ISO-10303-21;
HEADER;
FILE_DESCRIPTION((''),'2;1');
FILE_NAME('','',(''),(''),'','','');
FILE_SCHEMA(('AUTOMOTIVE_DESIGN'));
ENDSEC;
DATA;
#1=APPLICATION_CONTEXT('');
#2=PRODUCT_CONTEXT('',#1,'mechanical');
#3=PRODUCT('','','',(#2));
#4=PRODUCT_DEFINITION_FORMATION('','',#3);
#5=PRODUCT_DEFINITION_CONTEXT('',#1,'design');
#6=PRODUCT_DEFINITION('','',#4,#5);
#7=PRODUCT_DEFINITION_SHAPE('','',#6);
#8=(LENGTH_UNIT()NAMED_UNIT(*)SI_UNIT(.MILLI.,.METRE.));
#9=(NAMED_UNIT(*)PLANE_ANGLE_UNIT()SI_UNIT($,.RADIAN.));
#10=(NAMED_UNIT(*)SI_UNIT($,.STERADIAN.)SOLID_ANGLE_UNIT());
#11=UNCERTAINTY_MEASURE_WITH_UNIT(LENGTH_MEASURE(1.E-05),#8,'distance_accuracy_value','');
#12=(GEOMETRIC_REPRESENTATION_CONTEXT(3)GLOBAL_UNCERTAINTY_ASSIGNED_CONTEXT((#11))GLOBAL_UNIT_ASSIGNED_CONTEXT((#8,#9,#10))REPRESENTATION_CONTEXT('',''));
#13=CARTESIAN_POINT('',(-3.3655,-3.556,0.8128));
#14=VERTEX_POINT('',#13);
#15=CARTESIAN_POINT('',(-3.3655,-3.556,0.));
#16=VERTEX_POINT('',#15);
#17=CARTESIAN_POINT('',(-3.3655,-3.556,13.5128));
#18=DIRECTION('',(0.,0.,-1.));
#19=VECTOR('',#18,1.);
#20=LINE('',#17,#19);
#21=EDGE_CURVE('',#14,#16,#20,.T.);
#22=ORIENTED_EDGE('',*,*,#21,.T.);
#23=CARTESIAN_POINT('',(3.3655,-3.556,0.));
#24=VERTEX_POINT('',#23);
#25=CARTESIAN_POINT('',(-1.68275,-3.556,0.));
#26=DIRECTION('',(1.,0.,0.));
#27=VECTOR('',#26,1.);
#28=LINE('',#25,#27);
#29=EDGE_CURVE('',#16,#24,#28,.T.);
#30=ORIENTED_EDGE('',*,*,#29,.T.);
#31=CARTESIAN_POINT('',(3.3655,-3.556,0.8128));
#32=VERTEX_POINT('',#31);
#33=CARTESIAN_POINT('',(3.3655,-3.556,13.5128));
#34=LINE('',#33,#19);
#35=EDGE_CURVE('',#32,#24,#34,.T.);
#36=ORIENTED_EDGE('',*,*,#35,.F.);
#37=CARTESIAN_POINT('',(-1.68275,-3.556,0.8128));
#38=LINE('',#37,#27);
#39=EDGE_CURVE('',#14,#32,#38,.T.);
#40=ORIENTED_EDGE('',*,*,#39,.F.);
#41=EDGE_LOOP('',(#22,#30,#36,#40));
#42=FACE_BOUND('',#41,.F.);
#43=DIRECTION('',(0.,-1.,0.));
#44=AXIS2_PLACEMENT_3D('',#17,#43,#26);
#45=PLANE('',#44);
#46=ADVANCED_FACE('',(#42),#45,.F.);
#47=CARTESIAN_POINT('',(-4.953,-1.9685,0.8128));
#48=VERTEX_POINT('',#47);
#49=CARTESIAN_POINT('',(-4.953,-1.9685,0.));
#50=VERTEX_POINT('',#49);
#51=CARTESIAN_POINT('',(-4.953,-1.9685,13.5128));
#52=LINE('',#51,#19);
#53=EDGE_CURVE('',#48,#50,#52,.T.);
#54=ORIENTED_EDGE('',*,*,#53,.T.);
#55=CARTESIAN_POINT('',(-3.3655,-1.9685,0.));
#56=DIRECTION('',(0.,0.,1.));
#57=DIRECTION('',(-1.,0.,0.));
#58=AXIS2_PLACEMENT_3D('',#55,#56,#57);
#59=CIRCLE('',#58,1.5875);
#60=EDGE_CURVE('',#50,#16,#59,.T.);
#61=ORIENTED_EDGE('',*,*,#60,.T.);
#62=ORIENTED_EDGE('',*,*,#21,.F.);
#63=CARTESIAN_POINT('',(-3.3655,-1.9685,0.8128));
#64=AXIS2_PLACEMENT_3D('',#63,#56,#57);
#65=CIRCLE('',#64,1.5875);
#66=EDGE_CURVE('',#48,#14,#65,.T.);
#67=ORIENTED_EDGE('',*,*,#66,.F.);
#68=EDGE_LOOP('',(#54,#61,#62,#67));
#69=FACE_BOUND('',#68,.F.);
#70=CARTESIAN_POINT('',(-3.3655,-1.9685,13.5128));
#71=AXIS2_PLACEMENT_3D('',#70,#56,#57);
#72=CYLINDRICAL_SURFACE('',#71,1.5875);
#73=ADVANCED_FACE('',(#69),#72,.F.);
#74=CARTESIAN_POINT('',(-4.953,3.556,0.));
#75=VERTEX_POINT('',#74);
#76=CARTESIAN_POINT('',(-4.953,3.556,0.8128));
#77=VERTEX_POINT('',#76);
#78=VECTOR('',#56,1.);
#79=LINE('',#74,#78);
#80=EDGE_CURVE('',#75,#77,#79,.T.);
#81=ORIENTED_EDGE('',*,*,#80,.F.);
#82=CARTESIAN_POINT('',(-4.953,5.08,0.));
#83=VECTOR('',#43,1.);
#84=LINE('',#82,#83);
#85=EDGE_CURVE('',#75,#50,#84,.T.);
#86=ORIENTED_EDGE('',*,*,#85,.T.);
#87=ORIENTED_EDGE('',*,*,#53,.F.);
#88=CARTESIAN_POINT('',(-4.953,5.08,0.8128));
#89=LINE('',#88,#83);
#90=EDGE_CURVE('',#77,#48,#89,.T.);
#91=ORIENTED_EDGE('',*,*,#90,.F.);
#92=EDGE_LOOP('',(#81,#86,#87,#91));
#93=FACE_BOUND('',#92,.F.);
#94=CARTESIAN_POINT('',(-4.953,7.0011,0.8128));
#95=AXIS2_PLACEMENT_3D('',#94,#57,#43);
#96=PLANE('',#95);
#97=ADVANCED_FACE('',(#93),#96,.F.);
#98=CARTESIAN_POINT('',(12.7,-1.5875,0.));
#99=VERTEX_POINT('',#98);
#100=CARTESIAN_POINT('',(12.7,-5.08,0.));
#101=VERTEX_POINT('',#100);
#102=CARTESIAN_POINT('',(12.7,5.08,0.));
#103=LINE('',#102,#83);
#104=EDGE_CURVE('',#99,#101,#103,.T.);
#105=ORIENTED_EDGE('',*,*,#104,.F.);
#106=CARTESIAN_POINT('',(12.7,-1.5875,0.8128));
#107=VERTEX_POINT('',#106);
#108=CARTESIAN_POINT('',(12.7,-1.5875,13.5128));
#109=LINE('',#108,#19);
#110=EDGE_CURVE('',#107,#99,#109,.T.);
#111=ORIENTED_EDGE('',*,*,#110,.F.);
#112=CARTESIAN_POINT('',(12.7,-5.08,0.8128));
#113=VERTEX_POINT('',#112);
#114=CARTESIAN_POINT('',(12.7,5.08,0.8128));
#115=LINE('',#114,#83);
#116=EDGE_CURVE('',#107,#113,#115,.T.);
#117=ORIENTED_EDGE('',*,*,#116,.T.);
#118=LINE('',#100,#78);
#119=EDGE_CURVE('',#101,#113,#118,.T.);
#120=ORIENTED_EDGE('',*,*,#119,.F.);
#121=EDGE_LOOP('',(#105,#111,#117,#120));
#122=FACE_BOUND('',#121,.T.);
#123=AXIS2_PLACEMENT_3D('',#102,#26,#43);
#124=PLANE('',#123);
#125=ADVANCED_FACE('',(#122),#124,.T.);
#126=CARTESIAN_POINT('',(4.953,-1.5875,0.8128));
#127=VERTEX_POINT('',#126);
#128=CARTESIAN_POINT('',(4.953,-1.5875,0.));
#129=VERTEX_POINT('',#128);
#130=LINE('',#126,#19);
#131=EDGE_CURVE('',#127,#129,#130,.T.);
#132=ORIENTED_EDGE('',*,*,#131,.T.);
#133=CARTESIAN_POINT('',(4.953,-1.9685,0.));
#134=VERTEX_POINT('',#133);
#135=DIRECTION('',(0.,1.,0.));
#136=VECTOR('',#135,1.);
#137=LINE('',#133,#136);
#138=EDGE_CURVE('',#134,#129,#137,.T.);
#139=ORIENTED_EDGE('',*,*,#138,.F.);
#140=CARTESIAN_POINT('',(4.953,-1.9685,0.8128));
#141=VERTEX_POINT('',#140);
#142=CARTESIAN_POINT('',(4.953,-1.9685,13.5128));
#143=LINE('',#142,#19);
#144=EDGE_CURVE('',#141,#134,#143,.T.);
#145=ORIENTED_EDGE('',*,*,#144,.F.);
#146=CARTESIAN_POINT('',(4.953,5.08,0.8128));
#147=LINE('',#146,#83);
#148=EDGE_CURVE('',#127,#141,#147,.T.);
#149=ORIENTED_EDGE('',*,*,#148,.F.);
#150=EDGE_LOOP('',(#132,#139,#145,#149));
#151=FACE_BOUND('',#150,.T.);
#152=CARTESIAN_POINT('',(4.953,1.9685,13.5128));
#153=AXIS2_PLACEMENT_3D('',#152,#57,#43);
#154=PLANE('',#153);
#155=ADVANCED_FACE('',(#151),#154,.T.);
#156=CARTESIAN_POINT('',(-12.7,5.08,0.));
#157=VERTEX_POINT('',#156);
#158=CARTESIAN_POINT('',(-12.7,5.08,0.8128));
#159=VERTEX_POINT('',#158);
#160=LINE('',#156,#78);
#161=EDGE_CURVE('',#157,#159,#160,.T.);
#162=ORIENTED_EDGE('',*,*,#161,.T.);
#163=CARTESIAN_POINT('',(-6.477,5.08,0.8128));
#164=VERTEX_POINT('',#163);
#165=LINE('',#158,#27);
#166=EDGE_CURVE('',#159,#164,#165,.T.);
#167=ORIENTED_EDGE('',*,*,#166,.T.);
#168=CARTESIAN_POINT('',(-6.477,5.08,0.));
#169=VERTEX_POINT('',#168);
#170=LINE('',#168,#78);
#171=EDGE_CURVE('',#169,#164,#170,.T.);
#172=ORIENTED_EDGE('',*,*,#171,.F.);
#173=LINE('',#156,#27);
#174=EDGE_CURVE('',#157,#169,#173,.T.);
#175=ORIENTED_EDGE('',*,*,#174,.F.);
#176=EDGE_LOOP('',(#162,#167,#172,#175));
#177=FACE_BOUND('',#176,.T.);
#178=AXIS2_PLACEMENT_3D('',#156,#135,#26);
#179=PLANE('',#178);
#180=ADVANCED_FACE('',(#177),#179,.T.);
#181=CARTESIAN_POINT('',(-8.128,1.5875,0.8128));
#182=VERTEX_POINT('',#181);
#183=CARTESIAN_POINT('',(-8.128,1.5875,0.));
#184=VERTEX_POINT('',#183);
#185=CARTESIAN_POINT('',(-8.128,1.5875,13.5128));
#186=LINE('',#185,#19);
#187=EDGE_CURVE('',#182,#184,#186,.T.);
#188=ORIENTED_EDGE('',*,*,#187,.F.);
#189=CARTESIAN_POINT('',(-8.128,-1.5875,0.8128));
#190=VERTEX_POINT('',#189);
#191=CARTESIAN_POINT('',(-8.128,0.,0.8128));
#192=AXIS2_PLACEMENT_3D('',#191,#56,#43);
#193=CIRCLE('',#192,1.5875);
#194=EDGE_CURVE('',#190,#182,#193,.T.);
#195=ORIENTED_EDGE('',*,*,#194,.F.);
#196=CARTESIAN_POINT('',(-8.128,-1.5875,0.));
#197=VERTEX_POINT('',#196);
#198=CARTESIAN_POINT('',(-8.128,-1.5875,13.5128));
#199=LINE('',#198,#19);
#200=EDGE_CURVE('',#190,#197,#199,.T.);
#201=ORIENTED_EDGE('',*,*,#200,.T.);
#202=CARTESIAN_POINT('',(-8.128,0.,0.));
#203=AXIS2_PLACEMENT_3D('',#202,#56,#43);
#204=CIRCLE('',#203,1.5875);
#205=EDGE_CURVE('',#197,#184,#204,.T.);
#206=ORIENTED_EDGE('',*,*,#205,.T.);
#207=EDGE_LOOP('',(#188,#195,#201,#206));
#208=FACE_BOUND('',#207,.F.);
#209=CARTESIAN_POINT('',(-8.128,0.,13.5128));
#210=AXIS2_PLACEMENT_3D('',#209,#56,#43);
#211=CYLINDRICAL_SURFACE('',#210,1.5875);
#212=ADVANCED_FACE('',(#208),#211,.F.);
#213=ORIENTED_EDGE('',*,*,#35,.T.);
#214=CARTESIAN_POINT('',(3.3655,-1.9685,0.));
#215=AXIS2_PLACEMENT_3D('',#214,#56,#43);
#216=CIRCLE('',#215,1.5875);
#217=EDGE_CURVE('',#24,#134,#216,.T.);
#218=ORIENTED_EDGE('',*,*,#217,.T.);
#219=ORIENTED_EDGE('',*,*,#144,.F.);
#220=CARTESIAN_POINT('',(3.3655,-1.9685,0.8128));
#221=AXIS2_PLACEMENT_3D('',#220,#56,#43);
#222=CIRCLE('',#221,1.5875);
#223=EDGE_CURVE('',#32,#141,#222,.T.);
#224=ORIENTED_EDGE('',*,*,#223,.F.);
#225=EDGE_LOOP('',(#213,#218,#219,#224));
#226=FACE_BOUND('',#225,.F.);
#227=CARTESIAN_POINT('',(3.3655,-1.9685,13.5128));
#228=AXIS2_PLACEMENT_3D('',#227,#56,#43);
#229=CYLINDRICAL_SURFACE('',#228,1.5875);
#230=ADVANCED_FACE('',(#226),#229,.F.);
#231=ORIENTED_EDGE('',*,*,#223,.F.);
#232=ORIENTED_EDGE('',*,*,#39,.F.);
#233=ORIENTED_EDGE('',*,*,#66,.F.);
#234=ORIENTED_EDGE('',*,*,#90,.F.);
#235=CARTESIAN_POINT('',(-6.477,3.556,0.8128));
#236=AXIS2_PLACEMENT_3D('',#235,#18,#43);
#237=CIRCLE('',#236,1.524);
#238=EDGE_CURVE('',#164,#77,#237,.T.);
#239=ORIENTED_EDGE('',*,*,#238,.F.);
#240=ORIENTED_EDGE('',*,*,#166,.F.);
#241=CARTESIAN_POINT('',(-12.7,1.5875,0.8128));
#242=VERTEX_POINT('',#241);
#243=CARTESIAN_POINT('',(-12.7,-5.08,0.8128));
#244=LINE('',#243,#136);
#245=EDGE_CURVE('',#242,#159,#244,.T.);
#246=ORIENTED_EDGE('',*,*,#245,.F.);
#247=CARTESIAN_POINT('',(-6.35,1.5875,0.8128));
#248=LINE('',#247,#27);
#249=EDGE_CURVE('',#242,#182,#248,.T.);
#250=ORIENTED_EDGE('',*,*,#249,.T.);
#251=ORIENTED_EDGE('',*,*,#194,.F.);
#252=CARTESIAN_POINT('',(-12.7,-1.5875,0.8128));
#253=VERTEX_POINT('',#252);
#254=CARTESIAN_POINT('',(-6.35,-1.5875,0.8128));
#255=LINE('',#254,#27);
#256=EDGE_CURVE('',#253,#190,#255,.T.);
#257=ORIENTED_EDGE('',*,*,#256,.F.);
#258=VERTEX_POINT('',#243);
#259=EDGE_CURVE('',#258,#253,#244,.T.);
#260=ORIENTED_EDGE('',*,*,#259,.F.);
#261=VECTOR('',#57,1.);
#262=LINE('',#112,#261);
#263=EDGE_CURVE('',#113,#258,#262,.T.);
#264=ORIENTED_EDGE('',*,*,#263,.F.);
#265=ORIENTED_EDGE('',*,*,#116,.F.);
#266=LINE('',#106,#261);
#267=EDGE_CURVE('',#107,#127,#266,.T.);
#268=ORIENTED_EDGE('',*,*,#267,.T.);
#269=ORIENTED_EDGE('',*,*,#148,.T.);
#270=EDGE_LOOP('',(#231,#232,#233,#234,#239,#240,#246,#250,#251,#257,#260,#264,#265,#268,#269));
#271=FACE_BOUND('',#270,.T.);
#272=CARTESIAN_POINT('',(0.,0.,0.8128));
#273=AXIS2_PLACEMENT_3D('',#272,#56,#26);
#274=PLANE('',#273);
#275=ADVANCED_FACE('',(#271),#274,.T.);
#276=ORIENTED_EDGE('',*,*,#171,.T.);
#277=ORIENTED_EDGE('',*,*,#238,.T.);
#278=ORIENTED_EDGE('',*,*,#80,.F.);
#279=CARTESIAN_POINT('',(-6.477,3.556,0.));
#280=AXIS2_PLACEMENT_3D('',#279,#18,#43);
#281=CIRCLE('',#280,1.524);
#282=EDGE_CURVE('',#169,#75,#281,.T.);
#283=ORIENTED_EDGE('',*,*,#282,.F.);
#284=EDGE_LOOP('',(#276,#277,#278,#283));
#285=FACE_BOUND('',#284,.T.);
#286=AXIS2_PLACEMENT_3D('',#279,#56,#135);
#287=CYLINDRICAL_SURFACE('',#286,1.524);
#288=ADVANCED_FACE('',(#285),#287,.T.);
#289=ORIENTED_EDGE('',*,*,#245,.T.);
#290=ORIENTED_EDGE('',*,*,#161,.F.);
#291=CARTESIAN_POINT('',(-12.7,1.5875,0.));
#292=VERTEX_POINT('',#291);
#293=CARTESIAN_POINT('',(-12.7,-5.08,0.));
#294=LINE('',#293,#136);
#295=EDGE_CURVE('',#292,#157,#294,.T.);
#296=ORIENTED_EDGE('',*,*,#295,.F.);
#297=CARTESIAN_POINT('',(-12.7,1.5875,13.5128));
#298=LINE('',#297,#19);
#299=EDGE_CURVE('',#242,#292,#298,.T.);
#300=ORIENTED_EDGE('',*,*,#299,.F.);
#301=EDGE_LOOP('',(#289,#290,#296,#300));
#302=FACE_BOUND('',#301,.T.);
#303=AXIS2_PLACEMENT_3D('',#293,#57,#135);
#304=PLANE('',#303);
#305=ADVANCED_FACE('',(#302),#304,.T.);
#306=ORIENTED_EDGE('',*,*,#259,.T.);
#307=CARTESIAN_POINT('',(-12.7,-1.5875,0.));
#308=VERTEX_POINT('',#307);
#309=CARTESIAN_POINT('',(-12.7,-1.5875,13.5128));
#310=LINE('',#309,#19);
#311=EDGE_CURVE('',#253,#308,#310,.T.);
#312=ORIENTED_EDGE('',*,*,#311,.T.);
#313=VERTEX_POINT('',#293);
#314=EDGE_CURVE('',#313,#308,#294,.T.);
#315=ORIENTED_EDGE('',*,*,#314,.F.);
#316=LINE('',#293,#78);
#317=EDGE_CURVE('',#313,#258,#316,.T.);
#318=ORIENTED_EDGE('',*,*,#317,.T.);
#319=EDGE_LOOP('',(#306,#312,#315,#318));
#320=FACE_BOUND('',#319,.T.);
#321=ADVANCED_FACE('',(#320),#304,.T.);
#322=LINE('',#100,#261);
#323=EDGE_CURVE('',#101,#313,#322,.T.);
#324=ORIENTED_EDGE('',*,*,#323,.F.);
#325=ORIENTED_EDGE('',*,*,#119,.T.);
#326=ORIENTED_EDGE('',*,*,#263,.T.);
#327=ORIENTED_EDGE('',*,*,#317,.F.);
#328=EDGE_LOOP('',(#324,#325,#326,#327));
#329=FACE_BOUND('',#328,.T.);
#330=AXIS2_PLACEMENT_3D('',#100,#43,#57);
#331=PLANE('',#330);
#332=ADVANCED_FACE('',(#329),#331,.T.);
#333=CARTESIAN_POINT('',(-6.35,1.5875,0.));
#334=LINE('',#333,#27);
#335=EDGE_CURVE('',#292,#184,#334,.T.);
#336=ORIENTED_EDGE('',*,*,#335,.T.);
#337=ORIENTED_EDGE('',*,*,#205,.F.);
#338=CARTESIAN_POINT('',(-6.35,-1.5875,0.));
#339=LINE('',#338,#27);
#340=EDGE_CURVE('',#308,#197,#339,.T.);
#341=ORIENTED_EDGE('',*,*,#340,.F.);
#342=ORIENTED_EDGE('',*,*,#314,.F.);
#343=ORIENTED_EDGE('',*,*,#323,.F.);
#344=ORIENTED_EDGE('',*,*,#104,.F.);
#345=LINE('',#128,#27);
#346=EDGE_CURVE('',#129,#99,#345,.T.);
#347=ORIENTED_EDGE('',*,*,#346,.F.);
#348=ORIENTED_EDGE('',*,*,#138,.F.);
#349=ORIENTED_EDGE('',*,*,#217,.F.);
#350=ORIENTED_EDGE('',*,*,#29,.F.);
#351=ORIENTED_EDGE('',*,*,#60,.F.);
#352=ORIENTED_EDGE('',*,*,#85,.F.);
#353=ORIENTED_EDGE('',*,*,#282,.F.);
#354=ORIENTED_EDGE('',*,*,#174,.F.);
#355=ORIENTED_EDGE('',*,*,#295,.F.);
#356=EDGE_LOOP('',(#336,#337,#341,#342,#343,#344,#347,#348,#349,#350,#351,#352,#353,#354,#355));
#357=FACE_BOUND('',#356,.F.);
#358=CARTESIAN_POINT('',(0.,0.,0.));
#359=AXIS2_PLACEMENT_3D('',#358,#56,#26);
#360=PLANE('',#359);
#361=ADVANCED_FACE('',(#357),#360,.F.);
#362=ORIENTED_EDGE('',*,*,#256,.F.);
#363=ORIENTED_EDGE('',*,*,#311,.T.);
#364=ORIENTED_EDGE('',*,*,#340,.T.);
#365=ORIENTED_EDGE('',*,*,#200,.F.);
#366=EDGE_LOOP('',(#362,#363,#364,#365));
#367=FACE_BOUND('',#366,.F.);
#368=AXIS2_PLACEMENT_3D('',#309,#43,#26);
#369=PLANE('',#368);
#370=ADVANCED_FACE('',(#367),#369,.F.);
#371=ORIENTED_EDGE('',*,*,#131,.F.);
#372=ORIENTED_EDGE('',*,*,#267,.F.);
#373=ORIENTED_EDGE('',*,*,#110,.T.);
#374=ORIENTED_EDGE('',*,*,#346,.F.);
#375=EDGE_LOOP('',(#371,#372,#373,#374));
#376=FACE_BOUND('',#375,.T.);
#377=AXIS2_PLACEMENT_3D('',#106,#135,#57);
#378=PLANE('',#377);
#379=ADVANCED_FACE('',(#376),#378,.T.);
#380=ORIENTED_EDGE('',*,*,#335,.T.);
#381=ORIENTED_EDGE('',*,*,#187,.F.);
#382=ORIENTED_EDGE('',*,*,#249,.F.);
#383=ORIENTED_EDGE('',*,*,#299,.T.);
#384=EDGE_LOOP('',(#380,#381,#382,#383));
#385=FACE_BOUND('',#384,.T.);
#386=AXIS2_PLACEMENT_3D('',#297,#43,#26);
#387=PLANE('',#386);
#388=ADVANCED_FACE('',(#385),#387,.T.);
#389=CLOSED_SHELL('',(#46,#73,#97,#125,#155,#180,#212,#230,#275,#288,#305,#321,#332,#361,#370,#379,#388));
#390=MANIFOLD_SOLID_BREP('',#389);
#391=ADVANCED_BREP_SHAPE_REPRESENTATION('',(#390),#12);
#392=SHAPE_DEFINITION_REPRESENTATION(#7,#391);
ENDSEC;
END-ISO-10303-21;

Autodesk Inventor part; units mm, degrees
ref_plane "YZ Plane" through (0, 0, 0) normal (1, 0, 0) x (0, 1, 0)
ref_plane "XZ Plane" through (0, 0, 0) normal (0, 1, 0) x (-1, 0, 0)
sketch "Sketch1" plane through (0, 0, 0) normal (0, 0, 1) x (1, 0, 0)
  line L0 (-12.7, 5.08) -> (12.7, 5.08)
  line L1 (12.7, 5.08) -> (12.7, -5.08)
  line L2 (12.7, -5.08) -> (-12.7, -5.08)
  line L3 (-12.7, -5.08) -> (-12.7, 5.08)
  point P0 (0, 0)
  point P1 (0, 5.08)
  point P2 (-12.7, 0)
  dimension "d0" = 25.4
  dimension "d1" = 10.16
extrude "Extrusion1" add sketch "Sketch1" along normal blind 0.8128
ref_plane "Work Plane1" through (0, 0, 13.5128) normal (0, 0, 1) x (1, 0, 0)
sketch "Sketch2" plane through (0, 0, 13.5128) normal (0, 0, 1) x (1, 0, 0)
  line L0 (12.7, 5.08) -> (12.7, -5.08) projected
  line L1 (-12.7, 5.08) -> (12.7, 5.08) projected
  line L2 (-12.7, -5.08) -> (-12.7, 5.08) projected
  line L3 (12.7, -5.08) -> (-12.7, -5.08) projected
  line L4 (-3.3655, 3.556) -> (3.3655, 3.556)
  line L5 (-3.3655, -3.556) -> (3.3655, -3.556)
  line L6 (-4.953, 1.9685) -> (-4.953, -1.9685)
  line L7 (4.953, 1.9685) -> (4.953, -1.9685)
  arc A0 (-3.3655, 3.556) -> (-4.953, 1.9685) centre (-3.3655, 1.9685) ccw
  arc A1 (-4.953, -1.9685) -> (-3.3655, -3.556) centre (-3.3655, -1.9685) ccw
  arc A2 (3.3655, -3.556) -> (4.953, -1.9685) centre (3.3655, -1.9685) ccw
  arc A3 (4.953, 1.9685) -> (3.3655, 3.556) centre (3.3655, 1.9685) ccw
  point P0 (0, 0)
  point P1 (0, 3.556)
  point P2 (0, -3.556)
  point P3 (-4.953, 0)
  point P4 (4.953, 0)
  dimension "d5" = 6.731
  dimension "d6" = 6.731
  dimension "d7" = 3.937
  dimension "d8" = 3.937
  dimension "d9" = 4.953
  dimension "d10" = 4.953
  dimension "d11" = 3.556
  dimension "d12" = 3.556
  dimension "d13" = 1.5875
  dimension "d14" = 1.5875
  dimension "d15" = 1.5875
  dimension "d16" = 1.5875
extrude "Extrusion2" cut sketch "Sketch2" against normal blind 25.4 contours L4 A3 L7 A2 L5 A1 L6 A0
sketch "Sketch3" plane through (0, 0, 13.5128) normal (0, 0, 1) x (1, 0, 0)
  arc A0 (-3.3655, 3.556) -> (-4.953, 1.9685) centre (-3.3655, 1.9685) ccw projected
  line L0 (-3.3655, 3.556) -> (3.3655, 3.556) projected
  arc A1 (4.953, 1.9685) -> (3.3655, 3.556) centre (3.3655, 1.9685) ccw projected
  line L1 (4.953, 1.9685) -> (4.953, -1.9685) projected
  arc A2 (3.3655, -3.556) -> (4.953, -1.9685) centre (3.3655, -1.9685) ccw projected
  line L2 (3.3655, -3.556) -> (-3.3655, -3.556) projected
  arc A3 (-4.953, -1.9685) -> (-3.3655, -3.556) centre (-3.3655, -1.9685) ccw projected
  line L3 (-4.953, -1.9685) -> (-4.953, 1.9685) projected
  line L4 (12.7, 5.08) -> (12.7, -5.08) projected
  line L5 (-12.7, 5.08) -> (12.7, 5.08) projected
  line L6 (-12.7, -5.08) -> (-12.7, 5.08) projected
  line L7 (12.7, -5.08) -> (-12.7, -5.08) projected
  line L8 (-12.7, 1.5875) -> (-8.128, 1.5875)
  line L9 (-12.7, -1.5875) -> (-8.128, -1.5875)
  arc A4 (-8.128, -1.5875) -> (-8.128, 1.5875) centre (-8.128, 0) ccw
  point P0 (0, 0)
  dimension "d19" = 4.572
  dimension "d20" = 3.4925
  dimension "d21" = 4.572
  dimension "d22" = 3.175
  dimension "d24" = 1.5875
extrude "Extrusion3" cut sketch "Sketch3" against normal blind 25.4 contours L8 A4 L9 L6
mirror "Mirror1" about plane through (0, 0, 0) normal (1, 0, 0) of "Extrusion3"
sketch "Sketch5" plane through (0, 0, 0.8128) normal (0, 0, 1) x (1, 0, 0)
  line L0 (4.953, 1.9685) -> (4.953, -1.9685) construction
  line L1 (-4.953, -1.9685) -> (4.953, -1.9685)
  line L2 (4.953, -1.9685) -> (4.953, 7.0011)
  line L3 (4.953, 7.0011) -> (-4.953, 7.0011)
  line L4 (-4.953, 7.0011) -> (-4.953, -1.9685)
  point P0 (0, 0)
extrude "Extrusion5" cut sketch "Sketch5" against normal blind 25.4
fillet "Fillet1" radius 1.524 2 edges at (-4.953, 5.08, 0.4064) (4.953, 5.08, 0.4064)
sketch "Sketch7" plane through (0, 0, 0.8128) normal (0, 0, 1) x (1, 0, 0)
  line L0 (8.128, -1.5875) -> (12.7, -1.5875) construction
  line L1 (12.7, -1.5875) -> (4.953, -1.5875)
  line L2 (4.953, -1.5875) -> (4.953, 5.08)
  line L3 (4.953, 5.08) -> (12.7, 5.08)
  line L4 (12.7, 5.08) -> (12.7, -1.5875)
  point P0 (0, 0)
extrude "Extrusion6" cut sketch "Sketch7" against normal through all
properties part number "headplate_largerCenter_frontsidecutout"
